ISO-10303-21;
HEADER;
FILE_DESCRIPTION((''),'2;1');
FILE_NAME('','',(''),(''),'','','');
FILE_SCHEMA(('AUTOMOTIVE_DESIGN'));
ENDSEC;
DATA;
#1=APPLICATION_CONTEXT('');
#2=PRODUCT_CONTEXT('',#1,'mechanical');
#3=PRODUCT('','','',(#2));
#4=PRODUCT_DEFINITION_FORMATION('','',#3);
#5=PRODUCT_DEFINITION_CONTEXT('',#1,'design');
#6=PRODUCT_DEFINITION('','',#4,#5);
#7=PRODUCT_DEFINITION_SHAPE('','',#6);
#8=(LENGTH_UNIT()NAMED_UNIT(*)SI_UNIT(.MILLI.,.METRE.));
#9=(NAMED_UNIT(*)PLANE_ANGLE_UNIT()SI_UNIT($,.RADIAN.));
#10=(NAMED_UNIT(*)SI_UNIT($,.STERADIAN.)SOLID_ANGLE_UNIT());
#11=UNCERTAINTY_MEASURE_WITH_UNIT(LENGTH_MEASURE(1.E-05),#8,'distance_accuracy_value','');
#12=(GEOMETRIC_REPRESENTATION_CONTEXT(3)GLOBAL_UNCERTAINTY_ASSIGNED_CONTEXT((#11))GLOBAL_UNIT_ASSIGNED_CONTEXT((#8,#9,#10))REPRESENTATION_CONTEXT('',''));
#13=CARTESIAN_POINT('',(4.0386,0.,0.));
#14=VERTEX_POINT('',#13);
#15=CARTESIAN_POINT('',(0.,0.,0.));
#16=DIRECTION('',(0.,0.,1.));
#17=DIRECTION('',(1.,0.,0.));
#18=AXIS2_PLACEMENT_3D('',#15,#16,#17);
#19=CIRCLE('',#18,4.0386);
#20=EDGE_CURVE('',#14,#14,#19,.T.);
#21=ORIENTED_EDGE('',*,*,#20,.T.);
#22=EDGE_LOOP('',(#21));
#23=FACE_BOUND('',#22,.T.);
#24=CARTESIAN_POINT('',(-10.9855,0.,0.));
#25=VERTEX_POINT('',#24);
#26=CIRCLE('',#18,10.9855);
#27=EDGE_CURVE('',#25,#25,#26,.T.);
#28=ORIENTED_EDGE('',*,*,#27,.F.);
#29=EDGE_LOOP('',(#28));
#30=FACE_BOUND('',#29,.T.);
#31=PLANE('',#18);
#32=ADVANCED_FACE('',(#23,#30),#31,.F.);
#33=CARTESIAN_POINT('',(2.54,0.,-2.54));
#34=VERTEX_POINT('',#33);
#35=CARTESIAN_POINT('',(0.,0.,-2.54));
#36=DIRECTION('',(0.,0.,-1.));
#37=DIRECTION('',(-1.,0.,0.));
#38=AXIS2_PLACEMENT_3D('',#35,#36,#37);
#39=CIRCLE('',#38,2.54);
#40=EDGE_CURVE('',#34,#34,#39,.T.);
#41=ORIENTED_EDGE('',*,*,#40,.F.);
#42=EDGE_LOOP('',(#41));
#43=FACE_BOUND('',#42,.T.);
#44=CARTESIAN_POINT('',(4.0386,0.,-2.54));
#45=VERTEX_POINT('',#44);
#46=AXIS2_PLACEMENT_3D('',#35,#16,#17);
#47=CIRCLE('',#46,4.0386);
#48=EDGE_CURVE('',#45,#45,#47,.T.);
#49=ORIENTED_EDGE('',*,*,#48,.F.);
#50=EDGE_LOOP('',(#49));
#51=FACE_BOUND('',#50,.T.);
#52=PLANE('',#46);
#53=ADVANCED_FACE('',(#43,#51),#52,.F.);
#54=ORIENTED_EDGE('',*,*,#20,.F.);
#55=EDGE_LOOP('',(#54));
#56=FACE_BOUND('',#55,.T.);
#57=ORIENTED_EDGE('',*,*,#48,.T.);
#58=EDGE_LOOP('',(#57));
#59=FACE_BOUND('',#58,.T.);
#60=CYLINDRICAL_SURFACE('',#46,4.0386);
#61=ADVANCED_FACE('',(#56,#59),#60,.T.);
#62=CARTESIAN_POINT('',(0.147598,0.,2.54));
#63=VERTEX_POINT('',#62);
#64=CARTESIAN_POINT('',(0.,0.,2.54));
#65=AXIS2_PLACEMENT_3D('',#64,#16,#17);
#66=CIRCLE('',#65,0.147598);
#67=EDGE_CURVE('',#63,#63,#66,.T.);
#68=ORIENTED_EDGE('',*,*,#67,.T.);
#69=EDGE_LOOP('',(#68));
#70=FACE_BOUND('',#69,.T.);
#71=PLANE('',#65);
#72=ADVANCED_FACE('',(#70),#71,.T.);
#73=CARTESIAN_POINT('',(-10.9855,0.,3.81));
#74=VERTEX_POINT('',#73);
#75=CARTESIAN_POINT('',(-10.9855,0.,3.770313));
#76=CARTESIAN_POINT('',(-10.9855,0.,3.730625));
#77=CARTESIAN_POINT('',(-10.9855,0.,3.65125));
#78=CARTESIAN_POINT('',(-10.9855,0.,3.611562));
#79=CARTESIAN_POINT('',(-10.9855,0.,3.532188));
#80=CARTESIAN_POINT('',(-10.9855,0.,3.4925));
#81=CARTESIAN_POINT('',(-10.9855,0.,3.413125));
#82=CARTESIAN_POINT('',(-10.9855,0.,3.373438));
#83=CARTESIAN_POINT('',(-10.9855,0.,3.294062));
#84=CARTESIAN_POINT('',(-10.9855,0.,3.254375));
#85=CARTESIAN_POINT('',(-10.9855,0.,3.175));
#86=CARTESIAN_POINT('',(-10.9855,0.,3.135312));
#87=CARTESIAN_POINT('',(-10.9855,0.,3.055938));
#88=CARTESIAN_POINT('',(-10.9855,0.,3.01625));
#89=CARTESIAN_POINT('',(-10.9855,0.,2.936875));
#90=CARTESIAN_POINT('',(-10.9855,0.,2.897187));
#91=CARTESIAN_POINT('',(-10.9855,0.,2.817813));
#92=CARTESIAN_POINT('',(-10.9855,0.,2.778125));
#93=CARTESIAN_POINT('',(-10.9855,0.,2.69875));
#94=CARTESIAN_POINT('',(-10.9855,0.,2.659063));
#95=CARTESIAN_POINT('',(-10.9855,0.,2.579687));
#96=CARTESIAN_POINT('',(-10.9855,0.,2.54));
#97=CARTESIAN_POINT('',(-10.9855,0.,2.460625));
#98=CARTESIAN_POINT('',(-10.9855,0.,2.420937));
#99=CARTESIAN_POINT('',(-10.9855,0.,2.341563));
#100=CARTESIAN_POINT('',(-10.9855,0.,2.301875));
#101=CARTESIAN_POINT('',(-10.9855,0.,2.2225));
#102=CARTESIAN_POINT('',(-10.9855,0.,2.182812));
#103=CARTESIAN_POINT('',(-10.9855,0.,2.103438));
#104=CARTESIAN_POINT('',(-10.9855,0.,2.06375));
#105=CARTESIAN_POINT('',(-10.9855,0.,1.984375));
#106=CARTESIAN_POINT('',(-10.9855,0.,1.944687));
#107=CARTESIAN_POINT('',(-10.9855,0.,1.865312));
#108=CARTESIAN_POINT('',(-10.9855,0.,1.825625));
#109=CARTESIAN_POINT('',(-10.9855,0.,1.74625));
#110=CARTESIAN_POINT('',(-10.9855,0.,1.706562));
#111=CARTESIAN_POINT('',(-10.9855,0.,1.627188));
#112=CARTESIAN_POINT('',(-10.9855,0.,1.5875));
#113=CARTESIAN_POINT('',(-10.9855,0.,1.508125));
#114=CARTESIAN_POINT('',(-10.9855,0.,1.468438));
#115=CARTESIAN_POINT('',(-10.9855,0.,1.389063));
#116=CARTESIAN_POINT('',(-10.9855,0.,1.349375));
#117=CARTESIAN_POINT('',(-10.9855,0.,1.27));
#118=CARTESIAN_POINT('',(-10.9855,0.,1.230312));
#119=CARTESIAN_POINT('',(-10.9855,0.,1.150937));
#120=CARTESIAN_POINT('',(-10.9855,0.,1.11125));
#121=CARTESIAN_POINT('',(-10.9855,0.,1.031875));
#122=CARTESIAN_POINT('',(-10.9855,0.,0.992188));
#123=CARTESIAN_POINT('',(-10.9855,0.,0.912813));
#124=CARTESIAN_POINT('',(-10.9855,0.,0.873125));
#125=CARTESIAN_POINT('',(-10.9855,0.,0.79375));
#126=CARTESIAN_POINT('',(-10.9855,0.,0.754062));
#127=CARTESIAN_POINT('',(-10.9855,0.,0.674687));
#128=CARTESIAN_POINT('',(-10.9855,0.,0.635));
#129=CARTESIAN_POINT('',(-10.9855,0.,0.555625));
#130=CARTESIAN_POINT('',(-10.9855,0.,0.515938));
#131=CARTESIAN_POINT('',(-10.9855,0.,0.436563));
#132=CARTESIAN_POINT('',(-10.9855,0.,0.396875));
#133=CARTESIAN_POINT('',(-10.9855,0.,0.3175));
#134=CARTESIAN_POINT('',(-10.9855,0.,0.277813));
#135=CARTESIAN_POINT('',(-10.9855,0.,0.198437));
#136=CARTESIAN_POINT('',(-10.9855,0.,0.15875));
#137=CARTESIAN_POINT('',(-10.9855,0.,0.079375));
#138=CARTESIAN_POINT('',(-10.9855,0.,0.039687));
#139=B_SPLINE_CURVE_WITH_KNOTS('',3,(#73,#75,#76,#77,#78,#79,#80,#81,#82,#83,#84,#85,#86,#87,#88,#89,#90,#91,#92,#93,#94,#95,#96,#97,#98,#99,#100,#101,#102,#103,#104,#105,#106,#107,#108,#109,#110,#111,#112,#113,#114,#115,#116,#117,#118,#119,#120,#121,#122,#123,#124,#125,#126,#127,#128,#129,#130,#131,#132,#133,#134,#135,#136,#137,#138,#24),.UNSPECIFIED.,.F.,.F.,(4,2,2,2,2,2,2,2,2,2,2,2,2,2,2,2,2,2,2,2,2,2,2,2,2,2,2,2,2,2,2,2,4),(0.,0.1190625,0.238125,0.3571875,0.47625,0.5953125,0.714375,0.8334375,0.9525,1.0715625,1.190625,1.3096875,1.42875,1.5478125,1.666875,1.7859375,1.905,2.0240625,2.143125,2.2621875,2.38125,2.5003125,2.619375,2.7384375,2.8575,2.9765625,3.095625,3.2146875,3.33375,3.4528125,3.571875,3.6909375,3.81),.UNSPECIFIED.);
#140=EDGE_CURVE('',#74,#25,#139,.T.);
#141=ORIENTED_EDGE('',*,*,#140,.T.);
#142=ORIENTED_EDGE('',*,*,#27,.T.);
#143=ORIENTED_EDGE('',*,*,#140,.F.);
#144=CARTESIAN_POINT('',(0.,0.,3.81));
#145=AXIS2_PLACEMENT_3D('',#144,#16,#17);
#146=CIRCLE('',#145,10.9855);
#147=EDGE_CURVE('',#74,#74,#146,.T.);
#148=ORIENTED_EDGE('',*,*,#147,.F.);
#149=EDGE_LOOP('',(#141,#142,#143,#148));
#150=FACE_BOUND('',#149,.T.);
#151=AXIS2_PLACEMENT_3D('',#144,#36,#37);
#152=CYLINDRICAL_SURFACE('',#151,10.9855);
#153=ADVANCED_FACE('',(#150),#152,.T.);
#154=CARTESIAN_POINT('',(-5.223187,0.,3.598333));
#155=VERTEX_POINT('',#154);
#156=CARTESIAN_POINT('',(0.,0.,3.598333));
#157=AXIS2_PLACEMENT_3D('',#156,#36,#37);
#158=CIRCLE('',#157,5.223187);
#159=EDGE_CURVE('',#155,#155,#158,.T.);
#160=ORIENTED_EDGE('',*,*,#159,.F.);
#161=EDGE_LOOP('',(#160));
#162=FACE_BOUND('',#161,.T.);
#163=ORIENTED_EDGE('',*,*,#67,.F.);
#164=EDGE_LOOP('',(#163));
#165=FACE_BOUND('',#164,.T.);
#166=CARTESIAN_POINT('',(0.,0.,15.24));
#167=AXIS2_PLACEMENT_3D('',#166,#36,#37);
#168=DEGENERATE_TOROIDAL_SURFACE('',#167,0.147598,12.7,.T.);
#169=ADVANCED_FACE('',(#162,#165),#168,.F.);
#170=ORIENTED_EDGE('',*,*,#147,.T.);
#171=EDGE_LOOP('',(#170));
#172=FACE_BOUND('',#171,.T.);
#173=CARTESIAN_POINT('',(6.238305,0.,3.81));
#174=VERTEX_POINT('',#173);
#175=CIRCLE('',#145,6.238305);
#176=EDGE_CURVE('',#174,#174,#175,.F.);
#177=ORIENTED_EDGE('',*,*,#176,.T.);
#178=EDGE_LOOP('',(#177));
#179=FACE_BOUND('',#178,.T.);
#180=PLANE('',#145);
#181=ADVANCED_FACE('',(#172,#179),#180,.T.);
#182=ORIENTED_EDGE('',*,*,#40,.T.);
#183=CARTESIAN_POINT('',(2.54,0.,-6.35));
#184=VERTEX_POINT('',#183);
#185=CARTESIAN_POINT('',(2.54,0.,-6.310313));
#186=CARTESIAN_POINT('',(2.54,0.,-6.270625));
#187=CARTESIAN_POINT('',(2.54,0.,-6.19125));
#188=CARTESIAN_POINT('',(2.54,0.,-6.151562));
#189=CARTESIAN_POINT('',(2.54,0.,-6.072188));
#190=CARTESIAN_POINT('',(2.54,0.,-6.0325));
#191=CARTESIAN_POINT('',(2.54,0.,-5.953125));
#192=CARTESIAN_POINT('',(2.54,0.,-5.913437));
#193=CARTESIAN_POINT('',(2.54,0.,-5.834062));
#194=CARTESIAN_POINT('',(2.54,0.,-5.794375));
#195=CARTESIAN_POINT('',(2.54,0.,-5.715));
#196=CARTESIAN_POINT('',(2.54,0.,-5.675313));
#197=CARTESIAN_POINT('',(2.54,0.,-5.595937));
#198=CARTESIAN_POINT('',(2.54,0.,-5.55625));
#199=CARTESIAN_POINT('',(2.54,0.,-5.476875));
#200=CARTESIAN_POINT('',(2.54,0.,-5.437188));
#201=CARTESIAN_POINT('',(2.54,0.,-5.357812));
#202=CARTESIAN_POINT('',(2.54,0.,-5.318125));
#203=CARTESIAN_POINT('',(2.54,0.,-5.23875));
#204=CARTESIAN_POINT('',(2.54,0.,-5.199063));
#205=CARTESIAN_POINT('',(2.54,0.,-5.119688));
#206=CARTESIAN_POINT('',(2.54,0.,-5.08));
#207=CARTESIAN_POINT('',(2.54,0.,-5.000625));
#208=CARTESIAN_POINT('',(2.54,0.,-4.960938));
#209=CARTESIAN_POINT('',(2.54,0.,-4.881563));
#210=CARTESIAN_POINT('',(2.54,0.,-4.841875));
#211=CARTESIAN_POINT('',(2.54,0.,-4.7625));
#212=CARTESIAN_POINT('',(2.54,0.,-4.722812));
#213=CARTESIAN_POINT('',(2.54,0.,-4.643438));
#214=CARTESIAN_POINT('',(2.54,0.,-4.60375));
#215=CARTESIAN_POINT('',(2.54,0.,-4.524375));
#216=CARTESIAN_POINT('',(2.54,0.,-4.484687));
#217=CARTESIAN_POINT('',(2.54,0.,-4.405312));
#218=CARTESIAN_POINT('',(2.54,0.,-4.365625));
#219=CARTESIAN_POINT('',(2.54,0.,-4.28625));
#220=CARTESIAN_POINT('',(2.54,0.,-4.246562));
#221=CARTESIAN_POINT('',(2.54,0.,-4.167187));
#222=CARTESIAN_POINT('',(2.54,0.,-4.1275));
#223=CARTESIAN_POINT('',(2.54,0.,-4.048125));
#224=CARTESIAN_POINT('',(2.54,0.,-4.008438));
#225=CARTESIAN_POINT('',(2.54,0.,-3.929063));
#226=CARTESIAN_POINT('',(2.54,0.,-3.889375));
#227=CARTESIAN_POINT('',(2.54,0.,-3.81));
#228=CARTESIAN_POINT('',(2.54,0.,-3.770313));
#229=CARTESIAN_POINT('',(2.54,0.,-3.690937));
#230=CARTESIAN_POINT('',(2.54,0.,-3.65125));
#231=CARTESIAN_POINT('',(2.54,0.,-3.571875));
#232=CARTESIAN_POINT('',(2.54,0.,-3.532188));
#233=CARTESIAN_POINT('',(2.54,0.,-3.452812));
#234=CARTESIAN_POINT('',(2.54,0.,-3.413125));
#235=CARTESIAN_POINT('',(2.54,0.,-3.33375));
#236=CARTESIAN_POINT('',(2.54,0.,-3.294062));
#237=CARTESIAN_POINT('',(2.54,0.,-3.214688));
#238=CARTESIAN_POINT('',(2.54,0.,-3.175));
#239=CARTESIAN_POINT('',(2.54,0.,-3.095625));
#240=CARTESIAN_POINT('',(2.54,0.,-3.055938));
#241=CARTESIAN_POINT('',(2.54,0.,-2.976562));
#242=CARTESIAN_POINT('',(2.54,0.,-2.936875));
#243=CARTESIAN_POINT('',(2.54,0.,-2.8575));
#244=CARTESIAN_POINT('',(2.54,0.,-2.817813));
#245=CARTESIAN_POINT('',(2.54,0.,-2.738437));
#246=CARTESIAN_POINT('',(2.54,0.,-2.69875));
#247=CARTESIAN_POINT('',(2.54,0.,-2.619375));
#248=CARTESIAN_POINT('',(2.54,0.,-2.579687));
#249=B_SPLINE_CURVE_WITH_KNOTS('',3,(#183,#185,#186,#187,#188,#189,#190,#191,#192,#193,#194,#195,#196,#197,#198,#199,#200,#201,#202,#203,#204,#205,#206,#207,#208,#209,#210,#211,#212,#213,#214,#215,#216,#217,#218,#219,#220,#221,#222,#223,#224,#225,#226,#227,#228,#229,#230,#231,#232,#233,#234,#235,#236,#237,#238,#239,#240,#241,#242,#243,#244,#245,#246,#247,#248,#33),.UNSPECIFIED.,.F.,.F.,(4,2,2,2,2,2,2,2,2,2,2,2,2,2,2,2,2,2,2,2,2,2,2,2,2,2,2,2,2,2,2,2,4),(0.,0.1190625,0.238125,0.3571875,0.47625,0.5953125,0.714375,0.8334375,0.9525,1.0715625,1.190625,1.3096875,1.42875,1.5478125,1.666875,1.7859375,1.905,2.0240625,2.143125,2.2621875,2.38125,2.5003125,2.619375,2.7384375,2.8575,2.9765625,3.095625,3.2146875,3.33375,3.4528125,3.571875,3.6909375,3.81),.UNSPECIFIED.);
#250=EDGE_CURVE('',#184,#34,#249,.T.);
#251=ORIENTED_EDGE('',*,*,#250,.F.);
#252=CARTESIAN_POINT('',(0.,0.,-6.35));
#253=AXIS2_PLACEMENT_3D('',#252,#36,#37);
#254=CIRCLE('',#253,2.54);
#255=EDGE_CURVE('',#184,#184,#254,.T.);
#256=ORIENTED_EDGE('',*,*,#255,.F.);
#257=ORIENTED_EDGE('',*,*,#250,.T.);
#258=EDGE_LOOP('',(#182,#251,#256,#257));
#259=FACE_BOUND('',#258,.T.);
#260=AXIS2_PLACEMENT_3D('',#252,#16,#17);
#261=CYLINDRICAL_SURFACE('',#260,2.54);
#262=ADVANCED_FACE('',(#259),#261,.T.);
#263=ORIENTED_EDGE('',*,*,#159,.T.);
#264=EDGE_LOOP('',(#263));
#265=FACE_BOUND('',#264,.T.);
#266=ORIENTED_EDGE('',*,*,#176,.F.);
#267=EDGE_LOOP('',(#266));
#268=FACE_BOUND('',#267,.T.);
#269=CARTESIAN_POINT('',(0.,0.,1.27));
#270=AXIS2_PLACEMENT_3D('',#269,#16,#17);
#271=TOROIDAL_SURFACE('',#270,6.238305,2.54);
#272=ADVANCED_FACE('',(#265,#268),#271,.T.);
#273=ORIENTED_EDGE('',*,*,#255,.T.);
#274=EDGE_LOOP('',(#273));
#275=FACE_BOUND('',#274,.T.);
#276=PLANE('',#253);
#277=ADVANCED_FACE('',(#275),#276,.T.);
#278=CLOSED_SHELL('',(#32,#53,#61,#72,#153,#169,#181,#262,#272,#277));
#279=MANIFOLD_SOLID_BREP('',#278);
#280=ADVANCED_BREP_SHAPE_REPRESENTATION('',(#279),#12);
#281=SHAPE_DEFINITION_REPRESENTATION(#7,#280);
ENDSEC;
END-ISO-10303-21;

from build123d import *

# Parameters (mm, degrees)
SKETCH1_R           = 4.0386
BOSS_EXTRUDE1_DEPTH = 2.54
SKETCH1_4_R         = 10.9855
SKETCH1_4_R_2       = 4.0386
BOSS_EXTRUDE2_DEPTH = 3.81
FILLET1_R           = 2.54
FILLET2_R           = 12.7
SKETCH1_6_R         = 4.0386
BOSS_EXTRUDE3_DEPTH = 2.54
SKETCH3_R           = 2.54
BOSS_EXTRUDE4_DEPTH = 3.81


with BuildPart() as part:
    # Sketch1 → Boss-Extrude1 (new body)
    with BuildSketch(Plane.XY):
        Circle(SKETCH1_R)
    extrude(amount=BOSS_EXTRUDE1_DEPTH)

    # Sketch1<4> → Boss-Extrude2 (add)
    with BuildSketch(Plane.XY):
        with Locations(Location((0, 0, 0), (0, 0, 180))):
            Circle(SKETCH1_4_R)
        with Locations(Location((0, 0, 0), (0, 0, 180))):
            Circle(SKETCH1_4_R_2, mode=Mode.SUBTRACT)
    extrude(amount=BOSS_EXTRUDE2_DEPTH)

    # Fillet1
    # the kernel refuses this fillet: 2.54 mm, written as the material it takes off along each edge
    with BuildSketch(Plane(origin=(0, 0, 3.81), x_dir=(-1, 0, 0), z_dir=(0, 1, 0))) as fillet1_piece_1:
        with BuildLine():
            CenterArc((6.238304526, -2.54), FILLET1_R, 90, 60)
            Line((4.0386, -1.27), (3.994605909, -1.2446))
            ThreePointArc((3.994605909, -1.2446), (3.9878, -0.635), (3.9878, 0))
            Line((3.9878, 0), (4.0386, 0.0508))
            Line((4.0386, 0.0508), (6.238304526, 0.0508))
            Line((6.238304526, 0.0508), (6.238304526, 0))
        make_face()
    revolve(axis=Axis((0, 0, 3.81), (0, 0, 1)), mode=Mode.SUBTRACT)

    # Fillet2
    fillet2_edges = [part.edges().sort_by_distance(p)[0] for p in [
        (4.0386, 0, 2.54),
    ]]
    fillet(fillet2_edges, radius=FILLET2_R)

    # Sketch1<6> → Boss-Extrude3 (add)
    with BuildSketch(Plane.XY):
        Circle(SKETCH1_6_R)
    extrude(amount=-BOSS_EXTRUDE3_DEPTH)

    # Sketch3 → Boss-Extrude4 (add)
    with BuildSketch(Plane(origin=(0, 0, -2.54), x_dir=(-1, 0, 0), z_dir=(0, 0, -1))):
        with Locations(Location((0, 0, 0), (0, 0, 180))):
            Circle(SKETCH3_R)
    extrude(amount=BOSS_EXTRUDE4_DEPTH)


solid = part.part
